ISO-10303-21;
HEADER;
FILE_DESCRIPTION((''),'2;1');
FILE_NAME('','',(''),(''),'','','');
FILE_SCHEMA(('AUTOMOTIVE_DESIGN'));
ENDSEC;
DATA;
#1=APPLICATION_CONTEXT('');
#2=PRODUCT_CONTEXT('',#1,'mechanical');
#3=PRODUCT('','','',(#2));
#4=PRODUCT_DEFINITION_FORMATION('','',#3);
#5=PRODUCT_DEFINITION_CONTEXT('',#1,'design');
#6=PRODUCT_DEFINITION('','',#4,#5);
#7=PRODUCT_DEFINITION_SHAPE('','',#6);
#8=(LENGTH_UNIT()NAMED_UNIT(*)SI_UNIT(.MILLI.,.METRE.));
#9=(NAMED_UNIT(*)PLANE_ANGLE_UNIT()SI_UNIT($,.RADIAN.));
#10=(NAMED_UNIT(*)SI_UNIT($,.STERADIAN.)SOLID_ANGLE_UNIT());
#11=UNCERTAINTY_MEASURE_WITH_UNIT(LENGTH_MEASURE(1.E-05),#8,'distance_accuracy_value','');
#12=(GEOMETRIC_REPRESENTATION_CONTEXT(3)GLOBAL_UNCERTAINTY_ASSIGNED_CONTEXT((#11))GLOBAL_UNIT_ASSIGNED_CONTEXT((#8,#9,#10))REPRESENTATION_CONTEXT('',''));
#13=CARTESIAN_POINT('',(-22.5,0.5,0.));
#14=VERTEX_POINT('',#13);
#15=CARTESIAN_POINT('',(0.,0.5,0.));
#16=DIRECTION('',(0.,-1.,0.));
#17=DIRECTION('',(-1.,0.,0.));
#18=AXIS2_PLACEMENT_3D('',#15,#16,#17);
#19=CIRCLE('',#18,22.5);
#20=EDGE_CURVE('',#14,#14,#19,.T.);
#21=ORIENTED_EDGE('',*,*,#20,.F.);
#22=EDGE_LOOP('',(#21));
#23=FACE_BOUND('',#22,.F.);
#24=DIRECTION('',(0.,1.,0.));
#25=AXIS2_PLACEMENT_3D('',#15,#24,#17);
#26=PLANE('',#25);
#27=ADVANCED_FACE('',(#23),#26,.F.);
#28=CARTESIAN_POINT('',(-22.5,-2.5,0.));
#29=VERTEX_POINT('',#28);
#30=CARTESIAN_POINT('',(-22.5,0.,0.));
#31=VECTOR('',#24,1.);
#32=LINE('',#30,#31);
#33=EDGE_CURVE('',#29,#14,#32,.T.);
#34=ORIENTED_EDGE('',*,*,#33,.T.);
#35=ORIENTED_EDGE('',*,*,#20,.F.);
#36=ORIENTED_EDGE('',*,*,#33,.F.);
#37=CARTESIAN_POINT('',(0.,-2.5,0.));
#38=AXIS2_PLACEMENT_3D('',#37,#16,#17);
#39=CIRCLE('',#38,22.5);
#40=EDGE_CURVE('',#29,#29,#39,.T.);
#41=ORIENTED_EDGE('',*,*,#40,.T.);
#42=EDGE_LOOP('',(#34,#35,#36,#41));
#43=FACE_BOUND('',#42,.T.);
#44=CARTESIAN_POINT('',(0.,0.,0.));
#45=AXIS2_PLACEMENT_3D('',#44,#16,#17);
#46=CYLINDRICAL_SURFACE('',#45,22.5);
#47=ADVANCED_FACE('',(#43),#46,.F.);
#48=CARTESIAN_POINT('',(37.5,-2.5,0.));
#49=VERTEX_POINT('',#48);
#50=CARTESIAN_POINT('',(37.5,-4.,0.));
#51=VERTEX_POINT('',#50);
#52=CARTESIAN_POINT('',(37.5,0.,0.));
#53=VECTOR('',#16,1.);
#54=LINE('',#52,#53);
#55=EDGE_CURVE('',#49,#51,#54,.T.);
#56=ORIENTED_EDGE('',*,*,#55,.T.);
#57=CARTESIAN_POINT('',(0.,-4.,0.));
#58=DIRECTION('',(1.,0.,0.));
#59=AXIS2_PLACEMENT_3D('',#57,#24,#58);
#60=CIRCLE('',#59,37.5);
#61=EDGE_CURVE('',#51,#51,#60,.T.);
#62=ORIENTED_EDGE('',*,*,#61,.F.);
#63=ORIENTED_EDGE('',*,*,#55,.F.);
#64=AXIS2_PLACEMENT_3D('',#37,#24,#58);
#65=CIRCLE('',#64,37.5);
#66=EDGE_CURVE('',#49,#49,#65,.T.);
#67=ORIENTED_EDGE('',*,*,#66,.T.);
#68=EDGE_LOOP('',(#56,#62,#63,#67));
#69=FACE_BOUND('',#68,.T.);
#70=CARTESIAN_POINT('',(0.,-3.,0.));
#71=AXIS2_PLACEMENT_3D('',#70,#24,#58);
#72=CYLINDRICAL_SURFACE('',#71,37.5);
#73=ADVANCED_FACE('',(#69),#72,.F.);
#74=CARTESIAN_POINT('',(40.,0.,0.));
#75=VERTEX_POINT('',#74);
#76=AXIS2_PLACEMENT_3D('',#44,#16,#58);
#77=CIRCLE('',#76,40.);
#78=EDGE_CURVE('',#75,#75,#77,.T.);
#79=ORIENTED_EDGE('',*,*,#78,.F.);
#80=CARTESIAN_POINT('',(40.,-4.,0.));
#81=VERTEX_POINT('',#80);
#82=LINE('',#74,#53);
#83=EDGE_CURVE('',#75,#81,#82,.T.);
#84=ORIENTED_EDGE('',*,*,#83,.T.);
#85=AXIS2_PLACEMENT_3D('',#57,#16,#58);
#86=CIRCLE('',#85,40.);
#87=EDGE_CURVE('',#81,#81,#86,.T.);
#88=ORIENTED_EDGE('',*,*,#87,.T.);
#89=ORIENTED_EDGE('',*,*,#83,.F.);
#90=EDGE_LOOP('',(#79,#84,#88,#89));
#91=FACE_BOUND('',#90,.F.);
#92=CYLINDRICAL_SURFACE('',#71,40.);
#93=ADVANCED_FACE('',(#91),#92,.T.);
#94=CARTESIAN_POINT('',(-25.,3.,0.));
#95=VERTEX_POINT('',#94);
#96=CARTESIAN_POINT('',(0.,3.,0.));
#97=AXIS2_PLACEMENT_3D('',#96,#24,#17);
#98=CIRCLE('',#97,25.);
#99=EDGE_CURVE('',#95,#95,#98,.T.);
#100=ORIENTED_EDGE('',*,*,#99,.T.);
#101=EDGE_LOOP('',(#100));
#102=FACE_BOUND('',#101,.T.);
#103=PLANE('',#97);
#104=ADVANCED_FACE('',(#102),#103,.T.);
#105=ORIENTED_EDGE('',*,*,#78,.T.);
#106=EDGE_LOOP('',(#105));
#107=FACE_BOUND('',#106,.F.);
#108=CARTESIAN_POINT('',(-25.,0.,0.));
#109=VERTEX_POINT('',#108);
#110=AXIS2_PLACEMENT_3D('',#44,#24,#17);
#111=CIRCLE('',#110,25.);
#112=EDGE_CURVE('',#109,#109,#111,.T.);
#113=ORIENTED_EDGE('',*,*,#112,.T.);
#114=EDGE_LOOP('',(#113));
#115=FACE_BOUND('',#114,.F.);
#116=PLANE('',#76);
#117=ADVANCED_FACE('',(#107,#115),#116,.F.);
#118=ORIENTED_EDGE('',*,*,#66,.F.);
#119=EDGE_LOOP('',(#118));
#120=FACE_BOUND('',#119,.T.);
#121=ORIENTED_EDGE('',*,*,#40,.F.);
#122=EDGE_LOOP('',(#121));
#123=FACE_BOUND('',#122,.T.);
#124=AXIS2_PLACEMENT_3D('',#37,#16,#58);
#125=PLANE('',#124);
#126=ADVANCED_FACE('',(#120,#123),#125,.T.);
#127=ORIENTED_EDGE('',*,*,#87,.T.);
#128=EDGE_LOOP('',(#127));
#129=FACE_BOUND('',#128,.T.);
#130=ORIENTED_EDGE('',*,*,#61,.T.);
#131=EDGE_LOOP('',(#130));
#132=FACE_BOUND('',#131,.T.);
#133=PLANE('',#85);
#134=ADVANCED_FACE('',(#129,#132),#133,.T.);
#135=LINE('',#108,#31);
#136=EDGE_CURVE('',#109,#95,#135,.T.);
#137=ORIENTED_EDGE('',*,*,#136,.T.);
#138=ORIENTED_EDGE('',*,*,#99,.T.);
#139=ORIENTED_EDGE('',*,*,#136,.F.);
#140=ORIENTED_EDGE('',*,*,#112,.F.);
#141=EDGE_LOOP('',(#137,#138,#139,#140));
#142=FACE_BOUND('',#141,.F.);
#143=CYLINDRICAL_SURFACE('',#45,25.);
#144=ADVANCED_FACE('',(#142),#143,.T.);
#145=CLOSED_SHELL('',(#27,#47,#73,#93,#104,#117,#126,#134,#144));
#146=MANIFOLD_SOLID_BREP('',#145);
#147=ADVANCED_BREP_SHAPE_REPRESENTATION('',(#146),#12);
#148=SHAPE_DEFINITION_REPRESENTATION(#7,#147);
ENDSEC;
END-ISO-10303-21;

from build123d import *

# Parameters (mm, degrees)
F0_R     = 40
F1_DEPTH = 3
F2_DEPTH = 1
F3_R     = 25
F4_DEPTH = 3
F5_T     = -2.5


with BuildPart() as f1:
    # F0 (on Front) → F1 (new body)
    with BuildSketch(Plane.XZ):
        Circle(F0_R)
    extrude(amount=F1_DEPTH)

    # F2 (add): a face of the model
    f2_faces = [f1.faces().sort_by_distance(p)[0] for p in [
        (0, -3, 0),
    ]]
    extrude(f2_faces, amount=F2_DEPTH)

    # F3 (on face) → F4 (join)
    with BuildSketch(Plane(origin=(0, 0, 0), x_dir=(-1, 0, 0), z_dir=(0, 1, 0))):
        Circle(F3_R)
    extrude(amount=F4_DEPTH)

    # F5
    f5_openings = [f1.faces().sort_by_distance(p)[0] for p in [
        (0, -4, 0),
    ]]
    offset(amount=F5_T, openings=f5_openings, kind=Kind.INTERSECTION)


solid = f1.part
